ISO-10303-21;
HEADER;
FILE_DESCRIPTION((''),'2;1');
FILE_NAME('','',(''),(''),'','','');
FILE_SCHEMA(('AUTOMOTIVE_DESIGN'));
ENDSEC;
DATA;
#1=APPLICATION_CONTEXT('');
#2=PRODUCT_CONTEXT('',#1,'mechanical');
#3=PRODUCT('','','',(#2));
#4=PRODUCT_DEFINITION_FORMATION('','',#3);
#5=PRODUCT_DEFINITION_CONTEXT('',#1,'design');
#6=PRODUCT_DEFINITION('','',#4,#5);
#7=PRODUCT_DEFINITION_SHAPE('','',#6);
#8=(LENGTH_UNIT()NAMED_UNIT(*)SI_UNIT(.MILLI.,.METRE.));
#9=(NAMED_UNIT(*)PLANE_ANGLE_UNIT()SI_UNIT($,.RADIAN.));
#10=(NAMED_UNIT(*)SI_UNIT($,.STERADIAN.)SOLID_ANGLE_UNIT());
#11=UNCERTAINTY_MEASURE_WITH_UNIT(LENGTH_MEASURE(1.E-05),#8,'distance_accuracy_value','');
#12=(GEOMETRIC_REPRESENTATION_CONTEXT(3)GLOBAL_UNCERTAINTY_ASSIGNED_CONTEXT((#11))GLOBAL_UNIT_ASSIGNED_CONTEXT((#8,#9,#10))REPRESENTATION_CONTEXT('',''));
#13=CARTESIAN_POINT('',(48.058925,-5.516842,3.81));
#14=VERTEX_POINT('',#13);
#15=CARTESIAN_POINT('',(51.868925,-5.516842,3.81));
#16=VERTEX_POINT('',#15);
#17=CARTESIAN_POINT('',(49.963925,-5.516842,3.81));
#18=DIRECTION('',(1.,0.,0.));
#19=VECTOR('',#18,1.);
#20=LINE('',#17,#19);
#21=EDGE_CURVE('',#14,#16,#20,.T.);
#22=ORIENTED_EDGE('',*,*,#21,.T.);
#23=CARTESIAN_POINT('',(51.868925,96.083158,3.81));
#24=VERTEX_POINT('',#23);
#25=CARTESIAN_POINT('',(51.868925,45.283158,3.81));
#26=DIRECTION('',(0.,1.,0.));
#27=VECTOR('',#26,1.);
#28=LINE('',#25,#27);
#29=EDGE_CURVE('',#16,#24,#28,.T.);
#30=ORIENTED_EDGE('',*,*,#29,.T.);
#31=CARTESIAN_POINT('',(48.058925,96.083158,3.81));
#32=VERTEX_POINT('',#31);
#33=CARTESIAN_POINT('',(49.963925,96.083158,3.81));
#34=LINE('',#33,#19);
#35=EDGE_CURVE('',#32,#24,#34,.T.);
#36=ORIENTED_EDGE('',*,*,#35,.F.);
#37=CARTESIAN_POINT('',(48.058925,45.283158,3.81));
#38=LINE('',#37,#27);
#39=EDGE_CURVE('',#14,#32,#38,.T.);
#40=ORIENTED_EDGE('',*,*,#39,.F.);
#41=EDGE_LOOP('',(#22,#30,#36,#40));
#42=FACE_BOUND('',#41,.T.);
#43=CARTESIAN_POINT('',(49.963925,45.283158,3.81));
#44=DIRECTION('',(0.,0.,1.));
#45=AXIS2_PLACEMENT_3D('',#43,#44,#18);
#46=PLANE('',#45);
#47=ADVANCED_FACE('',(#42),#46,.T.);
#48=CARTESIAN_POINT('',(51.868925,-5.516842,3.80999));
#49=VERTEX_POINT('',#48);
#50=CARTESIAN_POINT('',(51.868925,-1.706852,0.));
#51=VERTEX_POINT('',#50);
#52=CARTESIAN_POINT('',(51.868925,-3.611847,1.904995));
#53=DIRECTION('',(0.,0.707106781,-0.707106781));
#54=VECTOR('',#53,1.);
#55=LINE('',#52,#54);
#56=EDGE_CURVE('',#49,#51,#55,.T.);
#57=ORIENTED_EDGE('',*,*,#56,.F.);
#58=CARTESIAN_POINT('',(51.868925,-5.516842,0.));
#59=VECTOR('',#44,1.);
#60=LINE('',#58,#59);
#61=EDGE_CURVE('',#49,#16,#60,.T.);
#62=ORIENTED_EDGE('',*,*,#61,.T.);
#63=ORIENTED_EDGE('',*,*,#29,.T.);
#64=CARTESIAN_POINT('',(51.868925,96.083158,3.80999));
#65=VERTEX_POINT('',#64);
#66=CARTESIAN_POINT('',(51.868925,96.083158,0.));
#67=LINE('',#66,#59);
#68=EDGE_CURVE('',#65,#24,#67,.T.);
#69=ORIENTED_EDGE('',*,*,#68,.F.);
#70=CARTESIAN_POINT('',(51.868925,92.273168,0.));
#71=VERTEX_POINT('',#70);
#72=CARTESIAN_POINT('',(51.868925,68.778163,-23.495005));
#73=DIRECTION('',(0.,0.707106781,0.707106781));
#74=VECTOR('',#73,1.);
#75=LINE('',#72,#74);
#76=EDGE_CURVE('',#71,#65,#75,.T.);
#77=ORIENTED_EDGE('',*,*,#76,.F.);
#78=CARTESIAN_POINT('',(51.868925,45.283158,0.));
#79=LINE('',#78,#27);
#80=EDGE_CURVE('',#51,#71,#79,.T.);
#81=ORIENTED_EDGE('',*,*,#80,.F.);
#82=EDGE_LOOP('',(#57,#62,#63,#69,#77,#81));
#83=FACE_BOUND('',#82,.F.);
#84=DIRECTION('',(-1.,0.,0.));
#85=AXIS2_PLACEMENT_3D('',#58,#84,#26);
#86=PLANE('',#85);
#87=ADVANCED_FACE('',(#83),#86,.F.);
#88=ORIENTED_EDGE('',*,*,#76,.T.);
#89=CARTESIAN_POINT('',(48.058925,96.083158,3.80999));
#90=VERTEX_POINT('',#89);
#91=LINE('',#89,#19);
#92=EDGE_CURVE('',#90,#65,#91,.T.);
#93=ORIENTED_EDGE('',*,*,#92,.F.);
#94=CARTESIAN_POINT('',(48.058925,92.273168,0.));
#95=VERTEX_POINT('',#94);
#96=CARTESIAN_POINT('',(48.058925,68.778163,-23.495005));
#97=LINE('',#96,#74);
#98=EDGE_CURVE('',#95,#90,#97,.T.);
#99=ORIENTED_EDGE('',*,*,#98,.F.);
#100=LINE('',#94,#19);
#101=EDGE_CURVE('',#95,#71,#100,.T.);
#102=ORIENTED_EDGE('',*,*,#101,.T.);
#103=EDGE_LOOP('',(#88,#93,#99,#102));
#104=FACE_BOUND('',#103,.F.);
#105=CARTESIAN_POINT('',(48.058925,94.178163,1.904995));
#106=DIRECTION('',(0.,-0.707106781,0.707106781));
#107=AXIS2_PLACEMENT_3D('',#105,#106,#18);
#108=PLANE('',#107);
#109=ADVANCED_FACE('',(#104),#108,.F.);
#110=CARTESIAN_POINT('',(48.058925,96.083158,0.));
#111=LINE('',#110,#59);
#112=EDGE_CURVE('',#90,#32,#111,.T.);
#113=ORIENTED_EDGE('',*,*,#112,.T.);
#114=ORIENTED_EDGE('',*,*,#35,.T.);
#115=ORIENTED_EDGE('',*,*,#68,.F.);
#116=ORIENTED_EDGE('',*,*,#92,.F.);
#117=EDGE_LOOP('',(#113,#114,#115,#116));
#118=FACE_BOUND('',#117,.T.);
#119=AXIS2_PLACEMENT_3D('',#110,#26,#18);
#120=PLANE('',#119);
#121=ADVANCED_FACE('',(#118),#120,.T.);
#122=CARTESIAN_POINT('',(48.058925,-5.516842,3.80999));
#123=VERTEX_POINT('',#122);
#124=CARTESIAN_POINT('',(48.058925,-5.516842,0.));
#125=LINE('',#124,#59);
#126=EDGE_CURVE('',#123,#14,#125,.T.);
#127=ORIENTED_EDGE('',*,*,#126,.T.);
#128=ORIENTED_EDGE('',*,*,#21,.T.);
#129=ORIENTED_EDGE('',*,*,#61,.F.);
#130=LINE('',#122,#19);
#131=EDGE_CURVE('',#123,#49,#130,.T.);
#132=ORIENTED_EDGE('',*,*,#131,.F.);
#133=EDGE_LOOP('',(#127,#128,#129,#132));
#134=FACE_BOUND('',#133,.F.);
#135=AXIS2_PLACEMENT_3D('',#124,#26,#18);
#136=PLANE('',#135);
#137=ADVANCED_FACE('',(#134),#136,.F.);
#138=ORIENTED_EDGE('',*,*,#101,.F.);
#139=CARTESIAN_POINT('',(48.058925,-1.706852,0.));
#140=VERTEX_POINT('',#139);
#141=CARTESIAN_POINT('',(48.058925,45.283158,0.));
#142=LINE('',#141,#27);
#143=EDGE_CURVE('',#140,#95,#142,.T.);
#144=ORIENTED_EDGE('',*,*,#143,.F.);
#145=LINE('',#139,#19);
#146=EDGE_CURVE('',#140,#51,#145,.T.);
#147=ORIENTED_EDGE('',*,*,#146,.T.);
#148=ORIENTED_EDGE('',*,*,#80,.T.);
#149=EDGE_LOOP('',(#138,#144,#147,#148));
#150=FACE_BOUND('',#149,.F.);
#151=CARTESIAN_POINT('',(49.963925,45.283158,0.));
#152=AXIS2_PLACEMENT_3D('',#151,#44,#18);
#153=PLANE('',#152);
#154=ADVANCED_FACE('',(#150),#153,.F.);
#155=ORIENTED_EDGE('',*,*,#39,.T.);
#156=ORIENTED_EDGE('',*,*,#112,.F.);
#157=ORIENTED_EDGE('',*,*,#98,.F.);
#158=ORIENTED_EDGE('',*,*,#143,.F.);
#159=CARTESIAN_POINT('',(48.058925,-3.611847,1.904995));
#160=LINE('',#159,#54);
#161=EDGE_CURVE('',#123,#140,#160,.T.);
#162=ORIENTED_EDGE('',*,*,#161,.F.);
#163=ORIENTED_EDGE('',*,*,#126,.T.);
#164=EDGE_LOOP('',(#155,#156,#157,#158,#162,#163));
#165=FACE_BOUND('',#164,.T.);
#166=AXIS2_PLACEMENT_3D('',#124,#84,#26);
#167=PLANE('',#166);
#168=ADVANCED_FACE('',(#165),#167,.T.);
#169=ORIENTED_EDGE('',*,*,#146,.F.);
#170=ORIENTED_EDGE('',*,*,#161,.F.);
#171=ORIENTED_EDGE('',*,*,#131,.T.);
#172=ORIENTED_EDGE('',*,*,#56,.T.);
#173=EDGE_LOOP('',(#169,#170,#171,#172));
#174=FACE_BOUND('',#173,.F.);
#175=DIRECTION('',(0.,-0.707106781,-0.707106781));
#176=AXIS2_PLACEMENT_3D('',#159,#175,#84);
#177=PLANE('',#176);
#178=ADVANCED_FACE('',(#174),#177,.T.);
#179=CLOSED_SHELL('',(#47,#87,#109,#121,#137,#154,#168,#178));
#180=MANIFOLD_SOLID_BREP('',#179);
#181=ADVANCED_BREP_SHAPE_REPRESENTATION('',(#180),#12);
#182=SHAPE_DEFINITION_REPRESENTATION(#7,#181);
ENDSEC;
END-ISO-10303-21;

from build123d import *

# Parameters (mm, degrees)
F0_W     = 3.81
F0_H     = 101.6
F1_DEPTH = 3.81
F2_SIZE  = 3.80999
F3_SIZE  = 3.80999


# Not quite as in the source:
# - a fillet or chamfer is up to 0.001 mm smaller than in the source, because OpenCascade refuses the exact size


with BuildPart() as f1:
    # F0 (on Top) → F1 (new body)
    with BuildSketch(Plane.XY):
        with Locations((49.9639250338, 45.283157554)):
            Rectangle(F0_W, F0_H)
    extrude(amount=F1_DEPTH)

    # F2 (size 3.81 in the source; OpenCascade refuses exactly that, so slightly less here)
    f2_edges = [f1.edges().sort_by_distance(p)[0] for p in [
        (49.963925, -5.516842, 0),
    ]]
    chamfer(f2_edges, length=F2_SIZE)

    # F3 (size 3.81 in the source; OpenCascade refuses exactly that, so slightly less here)
    f3_edges = [f1.edges().sort_by_distance(p)[0] for p in [
        (49.963925, 96.083158, 0),
    ]]
    chamfer(f3_edges, length=F3_SIZE)


solid = f1.part
